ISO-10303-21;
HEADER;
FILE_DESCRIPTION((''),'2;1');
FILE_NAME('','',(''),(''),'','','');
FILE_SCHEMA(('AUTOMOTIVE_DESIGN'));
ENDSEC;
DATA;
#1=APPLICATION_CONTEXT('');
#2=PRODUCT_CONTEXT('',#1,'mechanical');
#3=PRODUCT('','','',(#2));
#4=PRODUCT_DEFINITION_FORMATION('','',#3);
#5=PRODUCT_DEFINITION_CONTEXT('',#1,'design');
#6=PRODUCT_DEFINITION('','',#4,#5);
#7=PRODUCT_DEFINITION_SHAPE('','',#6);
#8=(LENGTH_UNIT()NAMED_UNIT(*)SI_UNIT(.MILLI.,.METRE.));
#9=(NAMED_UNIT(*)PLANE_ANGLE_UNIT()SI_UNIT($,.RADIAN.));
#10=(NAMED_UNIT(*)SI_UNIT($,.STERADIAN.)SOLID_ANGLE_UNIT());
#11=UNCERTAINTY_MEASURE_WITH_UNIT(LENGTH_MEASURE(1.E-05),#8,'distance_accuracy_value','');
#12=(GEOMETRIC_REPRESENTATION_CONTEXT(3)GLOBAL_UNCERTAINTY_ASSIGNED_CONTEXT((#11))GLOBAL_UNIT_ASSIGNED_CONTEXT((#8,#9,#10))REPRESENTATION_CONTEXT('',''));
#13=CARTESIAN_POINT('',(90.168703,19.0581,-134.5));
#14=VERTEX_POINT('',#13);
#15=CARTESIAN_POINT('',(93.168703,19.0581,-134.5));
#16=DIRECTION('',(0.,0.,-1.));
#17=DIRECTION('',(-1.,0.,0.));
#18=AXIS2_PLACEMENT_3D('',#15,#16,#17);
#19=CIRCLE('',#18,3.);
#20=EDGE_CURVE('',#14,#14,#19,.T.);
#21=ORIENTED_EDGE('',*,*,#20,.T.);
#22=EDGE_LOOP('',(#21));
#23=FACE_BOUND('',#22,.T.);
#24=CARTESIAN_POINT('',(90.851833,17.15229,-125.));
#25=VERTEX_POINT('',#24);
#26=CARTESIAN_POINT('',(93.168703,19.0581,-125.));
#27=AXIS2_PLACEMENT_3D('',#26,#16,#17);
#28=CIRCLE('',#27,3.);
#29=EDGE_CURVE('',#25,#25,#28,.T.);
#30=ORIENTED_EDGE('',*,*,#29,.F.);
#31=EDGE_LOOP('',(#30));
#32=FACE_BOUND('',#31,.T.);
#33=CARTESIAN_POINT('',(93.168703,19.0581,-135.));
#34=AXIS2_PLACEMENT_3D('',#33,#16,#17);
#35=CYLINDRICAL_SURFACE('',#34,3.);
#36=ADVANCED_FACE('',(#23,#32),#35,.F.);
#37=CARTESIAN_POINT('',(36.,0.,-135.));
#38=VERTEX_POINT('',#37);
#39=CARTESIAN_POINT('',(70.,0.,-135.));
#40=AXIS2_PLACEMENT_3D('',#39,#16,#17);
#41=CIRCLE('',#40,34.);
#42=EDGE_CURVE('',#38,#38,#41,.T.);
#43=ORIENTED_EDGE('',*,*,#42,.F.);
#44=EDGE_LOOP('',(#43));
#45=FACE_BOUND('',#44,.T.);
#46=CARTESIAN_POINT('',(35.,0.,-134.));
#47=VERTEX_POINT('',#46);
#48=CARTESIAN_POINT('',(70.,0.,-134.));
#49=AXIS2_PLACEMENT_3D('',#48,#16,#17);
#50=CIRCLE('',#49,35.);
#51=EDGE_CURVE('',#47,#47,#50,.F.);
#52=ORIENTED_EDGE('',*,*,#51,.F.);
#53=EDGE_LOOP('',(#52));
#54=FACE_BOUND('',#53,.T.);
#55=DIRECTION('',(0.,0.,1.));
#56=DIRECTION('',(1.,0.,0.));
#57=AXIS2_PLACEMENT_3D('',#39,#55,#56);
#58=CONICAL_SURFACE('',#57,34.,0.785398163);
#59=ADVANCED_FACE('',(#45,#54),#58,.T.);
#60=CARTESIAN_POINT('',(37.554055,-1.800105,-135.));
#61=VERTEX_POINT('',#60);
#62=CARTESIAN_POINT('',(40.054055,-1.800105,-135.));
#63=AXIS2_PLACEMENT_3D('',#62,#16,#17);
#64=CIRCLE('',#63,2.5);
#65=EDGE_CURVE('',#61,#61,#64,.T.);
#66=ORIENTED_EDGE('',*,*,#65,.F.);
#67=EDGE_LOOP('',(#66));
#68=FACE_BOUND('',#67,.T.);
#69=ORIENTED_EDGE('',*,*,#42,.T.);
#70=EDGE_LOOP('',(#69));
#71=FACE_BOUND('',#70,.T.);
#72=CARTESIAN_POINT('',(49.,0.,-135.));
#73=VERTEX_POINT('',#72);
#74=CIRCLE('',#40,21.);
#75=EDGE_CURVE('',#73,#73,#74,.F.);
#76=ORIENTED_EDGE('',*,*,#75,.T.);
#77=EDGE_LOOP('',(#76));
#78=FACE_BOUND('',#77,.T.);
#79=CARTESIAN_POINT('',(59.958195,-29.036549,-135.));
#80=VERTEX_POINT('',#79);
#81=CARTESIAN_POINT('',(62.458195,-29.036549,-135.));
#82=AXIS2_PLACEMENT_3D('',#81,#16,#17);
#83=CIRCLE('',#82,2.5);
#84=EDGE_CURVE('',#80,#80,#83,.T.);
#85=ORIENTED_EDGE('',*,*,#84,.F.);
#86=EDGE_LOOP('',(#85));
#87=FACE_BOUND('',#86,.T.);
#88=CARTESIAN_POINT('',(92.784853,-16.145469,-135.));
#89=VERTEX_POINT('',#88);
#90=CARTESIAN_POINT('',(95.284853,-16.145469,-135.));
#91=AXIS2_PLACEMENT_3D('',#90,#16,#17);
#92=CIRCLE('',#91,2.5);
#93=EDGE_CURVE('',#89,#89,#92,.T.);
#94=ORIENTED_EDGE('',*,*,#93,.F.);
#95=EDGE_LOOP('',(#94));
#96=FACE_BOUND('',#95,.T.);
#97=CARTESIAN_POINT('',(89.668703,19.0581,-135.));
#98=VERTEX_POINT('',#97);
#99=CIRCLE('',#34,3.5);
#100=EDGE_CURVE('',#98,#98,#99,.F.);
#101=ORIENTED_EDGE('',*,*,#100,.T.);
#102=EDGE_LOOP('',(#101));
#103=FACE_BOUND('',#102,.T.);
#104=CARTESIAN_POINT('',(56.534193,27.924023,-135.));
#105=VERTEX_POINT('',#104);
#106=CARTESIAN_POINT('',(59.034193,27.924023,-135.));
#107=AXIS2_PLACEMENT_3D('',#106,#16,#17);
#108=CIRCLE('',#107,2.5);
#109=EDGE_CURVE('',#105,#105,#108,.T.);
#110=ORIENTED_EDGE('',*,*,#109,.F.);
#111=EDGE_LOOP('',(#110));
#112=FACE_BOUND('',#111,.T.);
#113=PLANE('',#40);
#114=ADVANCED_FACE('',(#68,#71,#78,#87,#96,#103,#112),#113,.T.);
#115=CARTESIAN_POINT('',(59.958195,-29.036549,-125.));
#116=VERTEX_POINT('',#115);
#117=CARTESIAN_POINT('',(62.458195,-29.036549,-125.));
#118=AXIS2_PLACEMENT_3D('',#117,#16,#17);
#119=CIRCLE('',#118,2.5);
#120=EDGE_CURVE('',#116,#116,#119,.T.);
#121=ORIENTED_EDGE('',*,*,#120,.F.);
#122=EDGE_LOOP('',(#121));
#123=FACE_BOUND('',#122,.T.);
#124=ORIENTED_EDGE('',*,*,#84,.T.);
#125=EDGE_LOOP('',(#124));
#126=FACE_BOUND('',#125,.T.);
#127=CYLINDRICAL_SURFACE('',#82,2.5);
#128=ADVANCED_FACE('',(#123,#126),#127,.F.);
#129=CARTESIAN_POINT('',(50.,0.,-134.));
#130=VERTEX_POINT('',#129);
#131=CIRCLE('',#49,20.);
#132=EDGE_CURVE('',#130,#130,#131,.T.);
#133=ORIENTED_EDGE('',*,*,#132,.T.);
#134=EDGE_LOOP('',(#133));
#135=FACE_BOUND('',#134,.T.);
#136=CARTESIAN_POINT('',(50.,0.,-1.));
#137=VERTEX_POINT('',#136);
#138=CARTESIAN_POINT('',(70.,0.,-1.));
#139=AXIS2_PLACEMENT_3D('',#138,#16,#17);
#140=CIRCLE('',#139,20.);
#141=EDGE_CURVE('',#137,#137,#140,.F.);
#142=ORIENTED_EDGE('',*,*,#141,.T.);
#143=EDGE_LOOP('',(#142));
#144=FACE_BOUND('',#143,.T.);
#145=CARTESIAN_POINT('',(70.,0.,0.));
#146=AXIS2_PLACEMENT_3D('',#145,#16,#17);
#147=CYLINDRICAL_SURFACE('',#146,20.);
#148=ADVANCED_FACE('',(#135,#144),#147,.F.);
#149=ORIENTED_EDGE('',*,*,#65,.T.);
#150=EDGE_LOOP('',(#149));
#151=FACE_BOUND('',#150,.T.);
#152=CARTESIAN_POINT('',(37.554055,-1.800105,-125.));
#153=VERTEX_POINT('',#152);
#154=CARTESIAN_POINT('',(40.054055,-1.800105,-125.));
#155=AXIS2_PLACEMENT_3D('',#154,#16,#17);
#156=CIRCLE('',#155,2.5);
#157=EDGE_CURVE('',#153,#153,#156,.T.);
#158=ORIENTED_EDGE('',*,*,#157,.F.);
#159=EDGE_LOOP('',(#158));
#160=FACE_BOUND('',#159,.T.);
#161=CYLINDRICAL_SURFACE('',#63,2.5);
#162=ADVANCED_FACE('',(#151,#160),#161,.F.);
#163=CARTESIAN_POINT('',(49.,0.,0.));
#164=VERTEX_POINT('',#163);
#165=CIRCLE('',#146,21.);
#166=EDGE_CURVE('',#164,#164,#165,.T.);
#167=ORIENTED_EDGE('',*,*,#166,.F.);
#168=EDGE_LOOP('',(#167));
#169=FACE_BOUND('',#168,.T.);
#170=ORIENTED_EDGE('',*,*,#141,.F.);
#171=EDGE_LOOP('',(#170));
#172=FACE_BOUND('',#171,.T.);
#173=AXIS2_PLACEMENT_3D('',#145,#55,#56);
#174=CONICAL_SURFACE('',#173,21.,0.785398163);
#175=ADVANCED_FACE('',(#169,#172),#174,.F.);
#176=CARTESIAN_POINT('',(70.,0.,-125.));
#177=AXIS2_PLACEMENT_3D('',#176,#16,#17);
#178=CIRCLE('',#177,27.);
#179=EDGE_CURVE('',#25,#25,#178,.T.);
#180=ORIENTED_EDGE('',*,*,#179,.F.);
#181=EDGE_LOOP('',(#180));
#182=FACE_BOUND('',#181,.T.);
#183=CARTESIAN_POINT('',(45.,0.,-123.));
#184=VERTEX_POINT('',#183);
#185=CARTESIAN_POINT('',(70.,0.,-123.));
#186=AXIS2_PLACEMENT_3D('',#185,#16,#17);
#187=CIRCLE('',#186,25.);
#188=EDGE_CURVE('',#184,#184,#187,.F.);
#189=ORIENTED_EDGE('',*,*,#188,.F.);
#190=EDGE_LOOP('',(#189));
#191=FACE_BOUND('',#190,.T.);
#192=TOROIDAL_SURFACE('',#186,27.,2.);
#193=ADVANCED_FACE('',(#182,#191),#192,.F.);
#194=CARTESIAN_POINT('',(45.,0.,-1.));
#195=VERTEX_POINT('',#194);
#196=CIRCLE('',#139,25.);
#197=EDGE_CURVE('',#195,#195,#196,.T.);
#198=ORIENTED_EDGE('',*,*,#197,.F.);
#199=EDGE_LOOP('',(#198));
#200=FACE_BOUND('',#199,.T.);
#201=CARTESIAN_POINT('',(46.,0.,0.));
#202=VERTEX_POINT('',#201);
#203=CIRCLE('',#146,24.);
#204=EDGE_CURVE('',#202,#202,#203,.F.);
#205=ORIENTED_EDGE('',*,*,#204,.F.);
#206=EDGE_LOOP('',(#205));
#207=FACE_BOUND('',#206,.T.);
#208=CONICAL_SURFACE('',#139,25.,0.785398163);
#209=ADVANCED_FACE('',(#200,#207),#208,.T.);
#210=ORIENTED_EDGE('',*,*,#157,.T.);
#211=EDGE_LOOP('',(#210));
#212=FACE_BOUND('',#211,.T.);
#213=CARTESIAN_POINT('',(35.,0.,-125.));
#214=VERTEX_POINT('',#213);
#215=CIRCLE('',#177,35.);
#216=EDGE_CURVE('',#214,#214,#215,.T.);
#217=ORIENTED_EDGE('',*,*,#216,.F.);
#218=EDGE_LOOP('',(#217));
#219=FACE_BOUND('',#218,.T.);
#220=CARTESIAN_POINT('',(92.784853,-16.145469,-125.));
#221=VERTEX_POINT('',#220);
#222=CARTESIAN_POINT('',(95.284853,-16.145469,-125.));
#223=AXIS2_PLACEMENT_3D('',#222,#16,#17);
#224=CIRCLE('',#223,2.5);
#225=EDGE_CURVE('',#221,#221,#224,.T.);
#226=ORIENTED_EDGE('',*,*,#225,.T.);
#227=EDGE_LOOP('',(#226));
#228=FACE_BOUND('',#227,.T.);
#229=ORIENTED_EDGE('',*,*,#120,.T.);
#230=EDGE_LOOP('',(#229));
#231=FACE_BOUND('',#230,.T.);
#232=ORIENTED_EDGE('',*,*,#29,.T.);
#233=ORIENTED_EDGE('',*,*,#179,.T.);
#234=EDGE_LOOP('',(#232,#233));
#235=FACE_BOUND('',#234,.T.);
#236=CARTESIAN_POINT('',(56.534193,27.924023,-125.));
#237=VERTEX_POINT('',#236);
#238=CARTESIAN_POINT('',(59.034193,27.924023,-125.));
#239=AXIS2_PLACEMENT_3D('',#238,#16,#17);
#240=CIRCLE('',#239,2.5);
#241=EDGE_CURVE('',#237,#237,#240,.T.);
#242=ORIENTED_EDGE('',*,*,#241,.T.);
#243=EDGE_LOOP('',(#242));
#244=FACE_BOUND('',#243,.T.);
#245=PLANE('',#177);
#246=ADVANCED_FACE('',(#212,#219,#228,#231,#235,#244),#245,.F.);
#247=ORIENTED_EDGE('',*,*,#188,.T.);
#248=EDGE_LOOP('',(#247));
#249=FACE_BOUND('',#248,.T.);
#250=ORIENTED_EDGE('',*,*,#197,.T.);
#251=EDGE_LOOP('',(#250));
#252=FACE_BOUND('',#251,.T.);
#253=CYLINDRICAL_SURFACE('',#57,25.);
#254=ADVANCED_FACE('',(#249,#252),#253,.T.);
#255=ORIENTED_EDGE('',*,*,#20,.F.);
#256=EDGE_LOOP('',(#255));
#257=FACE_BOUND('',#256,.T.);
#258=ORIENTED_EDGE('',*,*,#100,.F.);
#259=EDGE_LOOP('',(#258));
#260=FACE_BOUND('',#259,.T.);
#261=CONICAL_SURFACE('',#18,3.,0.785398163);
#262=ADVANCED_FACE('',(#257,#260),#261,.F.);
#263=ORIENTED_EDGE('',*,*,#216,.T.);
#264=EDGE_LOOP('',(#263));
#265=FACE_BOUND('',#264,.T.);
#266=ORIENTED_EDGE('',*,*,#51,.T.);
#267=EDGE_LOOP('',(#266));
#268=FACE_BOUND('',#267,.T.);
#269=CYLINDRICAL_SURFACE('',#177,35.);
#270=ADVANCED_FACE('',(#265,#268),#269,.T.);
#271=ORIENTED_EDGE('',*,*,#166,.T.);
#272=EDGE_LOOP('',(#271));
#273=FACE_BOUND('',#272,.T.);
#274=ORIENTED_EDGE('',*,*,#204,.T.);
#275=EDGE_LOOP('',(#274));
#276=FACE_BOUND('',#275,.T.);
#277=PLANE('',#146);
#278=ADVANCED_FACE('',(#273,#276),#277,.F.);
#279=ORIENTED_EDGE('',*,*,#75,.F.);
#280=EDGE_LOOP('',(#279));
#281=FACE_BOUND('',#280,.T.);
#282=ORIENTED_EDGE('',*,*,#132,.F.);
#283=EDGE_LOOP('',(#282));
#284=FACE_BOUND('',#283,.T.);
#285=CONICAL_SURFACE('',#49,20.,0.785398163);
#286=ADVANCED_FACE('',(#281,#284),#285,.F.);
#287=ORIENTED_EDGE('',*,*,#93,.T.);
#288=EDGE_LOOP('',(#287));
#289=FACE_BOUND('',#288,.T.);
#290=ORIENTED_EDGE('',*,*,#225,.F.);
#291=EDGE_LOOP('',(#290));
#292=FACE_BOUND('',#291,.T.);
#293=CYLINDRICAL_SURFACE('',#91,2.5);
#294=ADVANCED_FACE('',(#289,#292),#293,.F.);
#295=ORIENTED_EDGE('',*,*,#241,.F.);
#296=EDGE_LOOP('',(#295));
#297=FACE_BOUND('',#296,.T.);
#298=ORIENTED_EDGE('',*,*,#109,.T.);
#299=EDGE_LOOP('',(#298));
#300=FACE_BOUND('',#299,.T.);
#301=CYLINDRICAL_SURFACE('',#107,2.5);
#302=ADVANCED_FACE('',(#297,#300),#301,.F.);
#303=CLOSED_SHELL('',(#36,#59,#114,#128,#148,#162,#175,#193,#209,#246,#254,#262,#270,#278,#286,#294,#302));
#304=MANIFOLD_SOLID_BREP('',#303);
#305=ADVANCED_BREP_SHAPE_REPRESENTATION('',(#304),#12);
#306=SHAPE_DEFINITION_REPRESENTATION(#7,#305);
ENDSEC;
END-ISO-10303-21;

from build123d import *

# Parameters (mm, degrees)
SKETCH_1_R                = 35
EXTRUDE_1_DEPTH           = 5
SKETCH_2_R                = 25
EXTRUDE_2_DEPTH           = 135
SKETCH_4_R                = 35
CUT_EXTRUDE_2_DEPTH       = 5
SKETCH_9_R                = 35
EXTRUDE_3_DEPTH           = 10
CHAMFER_1_SIZE            = 1
HOLE_WIZARD_M6_1_D        = 5
HOLE_WIZARD_M6_1_DEPTH    = 25
HOLE_WIZARD_M6_1_TIP      = 1.502151548
HOLE_WIZARD_6_0_6_1_D     = 6
HOLE_WIZARD_6_0_6_1_DEPTH = 20
HOLE_WIZARD_6_0_6_1_TIP   = 1.802581857
CHAMFER_2_SIZE            = 0.5
SKETCH_10_R               = 20
CUT_EXTRUDE_3_DEPTH       = 175.570902501
FILLET_1_R                = 2
CHAMFER_3_SIZE            = 1


with BuildPart() as part:
    # 草图1 → 凸台-拉伸1 (new body)
    with BuildSketch(Plane.XY):
        with Locations((70, 0)):
            Circle(SKETCH_1_R)
    extrude(amount=EXTRUDE_1_DEPTH)

    # 草图2 → 凸台-拉伸2 (add)
    with BuildSketch(Plane(origin=(0, 0, 0), x_dir=(-1, 0, 0), z_dir=(0, 0, -1))):
        with Locations(Location((-70, 0, 0), (0, 0, 180))):
            Circle(SKETCH_2_R)
    extrude(amount=EXTRUDE_2_DEPTH)

    # 草图4 → 切除-拉伸2 (cut)
    with BuildSketch(Plane(origin=(0, 0, 0), x_dir=(-1, 0, 0), z_dir=(0, 0, -1))):
        with Locations((-70, 0)):
            Circle(SKETCH_4_R)
    extrude(amount=-CUT_EXTRUDE_2_DEPTH, mode=Mode.SUBTRACT)

    # 草图9 → 凸台-拉伸3 (add)
    with BuildSketch(Plane(origin=(0, 0, -135), x_dir=(-1, 0, 0), z_dir=(0, 0, -1))):
        with Locations((-70, 0)):
            Circle(SKETCH_9_R)
    extrude(amount=-EXTRUDE_3_DEPTH)

    # 倒角1
    chamfer_1_edges = [part.edges().sort_by_distance(p)[0] for p in [
        (105, 0, -135),
        (45, 0, 0),
    ]]
    chamfer(chamfer_1_edges, length=CHAMFER_1_SIZE)

    # M6 螺纹孔1
    with Locations(Plane(origin=(0, 0, -135), x_dir=(-1, 0, 0), z_dir=(0, 0, -1))):
        with Locations((-62.458195458, -29.036549111), (-95.284853471, -16.145469487), (-59.034192698, 27.924023174), (-40.054054986, -1.800104779)):
            Hole(HOLE_WIZARD_M6_1_D / 2, depth=HOLE_WIZARD_M6_1_DEPTH)
            with Locations((0, 0, -(HOLE_WIZARD_M6_1_DEPTH + HOLE_WIZARD_M6_1_TIP / 2))):  # 118° drill point
                Cone(0, HOLE_WIZARD_M6_1_D / 2, HOLE_WIZARD_M6_1_TIP, mode=Mode.SUBTRACT)

    # Ø6.0 (6) 直径孔1
    with Locations(Plane(origin=(0, 0, -135), x_dir=(-1, 0, 0), z_dir=(0, 0, -1))):
        with Locations((-93.168703387, 19.058100203)):
            Hole(HOLE_WIZARD_6_0_6_1_D / 2, depth=HOLE_WIZARD_6_0_6_1_DEPTH)
            with Locations((0, 0, -(HOLE_WIZARD_6_0_6_1_DEPTH + HOLE_WIZARD_6_0_6_1_TIP / 2))):  # 118° drill point
                Cone(0, HOLE_WIZARD_6_0_6_1_D / 2, HOLE_WIZARD_6_0_6_1_TIP, mode=Mode.SUBTRACT)

    # 倒角2
    chamfer_2_edges = [part.edges().sort_by_distance(p)[0] for p in [
        (90.168703387, 19.058100203, -135),
    ]]
    chamfer(chamfer_2_edges, length=CHAMFER_2_SIZE)

    # 草图10 → 切除-拉伸3 (cut, through all)
    with BuildSketch(Plane(origin=(0, 0, -135), x_dir=(-1, 0, 0), z_dir=(0, 0, -1))):
        with Locations((-70, 0)):
            Circle(SKETCH_10_R)
    extrude(amount=-CUT_EXTRUDE_3_DEPTH, mode=Mode.SUBTRACT)

    # 圆角1
    fillet_1_edges = [part.edges().sort_by_distance(p)[0] for p in [
        (45, 0, -125),
    ]]
    fillet(fillet_1_edges, radius=FILLET_1_R - 0.0001)  # a hair under: the kernel refuses the full size

    # 倒角3
    chamfer_3_edges = [part.edges().sort_by_distance(p)[0] for p in [
        (90, 0, 0),
        (90, 0, -135),
    ]]
    chamfer(chamfer_3_edges, length=CHAMFER_3_SIZE)


solid = part.part
